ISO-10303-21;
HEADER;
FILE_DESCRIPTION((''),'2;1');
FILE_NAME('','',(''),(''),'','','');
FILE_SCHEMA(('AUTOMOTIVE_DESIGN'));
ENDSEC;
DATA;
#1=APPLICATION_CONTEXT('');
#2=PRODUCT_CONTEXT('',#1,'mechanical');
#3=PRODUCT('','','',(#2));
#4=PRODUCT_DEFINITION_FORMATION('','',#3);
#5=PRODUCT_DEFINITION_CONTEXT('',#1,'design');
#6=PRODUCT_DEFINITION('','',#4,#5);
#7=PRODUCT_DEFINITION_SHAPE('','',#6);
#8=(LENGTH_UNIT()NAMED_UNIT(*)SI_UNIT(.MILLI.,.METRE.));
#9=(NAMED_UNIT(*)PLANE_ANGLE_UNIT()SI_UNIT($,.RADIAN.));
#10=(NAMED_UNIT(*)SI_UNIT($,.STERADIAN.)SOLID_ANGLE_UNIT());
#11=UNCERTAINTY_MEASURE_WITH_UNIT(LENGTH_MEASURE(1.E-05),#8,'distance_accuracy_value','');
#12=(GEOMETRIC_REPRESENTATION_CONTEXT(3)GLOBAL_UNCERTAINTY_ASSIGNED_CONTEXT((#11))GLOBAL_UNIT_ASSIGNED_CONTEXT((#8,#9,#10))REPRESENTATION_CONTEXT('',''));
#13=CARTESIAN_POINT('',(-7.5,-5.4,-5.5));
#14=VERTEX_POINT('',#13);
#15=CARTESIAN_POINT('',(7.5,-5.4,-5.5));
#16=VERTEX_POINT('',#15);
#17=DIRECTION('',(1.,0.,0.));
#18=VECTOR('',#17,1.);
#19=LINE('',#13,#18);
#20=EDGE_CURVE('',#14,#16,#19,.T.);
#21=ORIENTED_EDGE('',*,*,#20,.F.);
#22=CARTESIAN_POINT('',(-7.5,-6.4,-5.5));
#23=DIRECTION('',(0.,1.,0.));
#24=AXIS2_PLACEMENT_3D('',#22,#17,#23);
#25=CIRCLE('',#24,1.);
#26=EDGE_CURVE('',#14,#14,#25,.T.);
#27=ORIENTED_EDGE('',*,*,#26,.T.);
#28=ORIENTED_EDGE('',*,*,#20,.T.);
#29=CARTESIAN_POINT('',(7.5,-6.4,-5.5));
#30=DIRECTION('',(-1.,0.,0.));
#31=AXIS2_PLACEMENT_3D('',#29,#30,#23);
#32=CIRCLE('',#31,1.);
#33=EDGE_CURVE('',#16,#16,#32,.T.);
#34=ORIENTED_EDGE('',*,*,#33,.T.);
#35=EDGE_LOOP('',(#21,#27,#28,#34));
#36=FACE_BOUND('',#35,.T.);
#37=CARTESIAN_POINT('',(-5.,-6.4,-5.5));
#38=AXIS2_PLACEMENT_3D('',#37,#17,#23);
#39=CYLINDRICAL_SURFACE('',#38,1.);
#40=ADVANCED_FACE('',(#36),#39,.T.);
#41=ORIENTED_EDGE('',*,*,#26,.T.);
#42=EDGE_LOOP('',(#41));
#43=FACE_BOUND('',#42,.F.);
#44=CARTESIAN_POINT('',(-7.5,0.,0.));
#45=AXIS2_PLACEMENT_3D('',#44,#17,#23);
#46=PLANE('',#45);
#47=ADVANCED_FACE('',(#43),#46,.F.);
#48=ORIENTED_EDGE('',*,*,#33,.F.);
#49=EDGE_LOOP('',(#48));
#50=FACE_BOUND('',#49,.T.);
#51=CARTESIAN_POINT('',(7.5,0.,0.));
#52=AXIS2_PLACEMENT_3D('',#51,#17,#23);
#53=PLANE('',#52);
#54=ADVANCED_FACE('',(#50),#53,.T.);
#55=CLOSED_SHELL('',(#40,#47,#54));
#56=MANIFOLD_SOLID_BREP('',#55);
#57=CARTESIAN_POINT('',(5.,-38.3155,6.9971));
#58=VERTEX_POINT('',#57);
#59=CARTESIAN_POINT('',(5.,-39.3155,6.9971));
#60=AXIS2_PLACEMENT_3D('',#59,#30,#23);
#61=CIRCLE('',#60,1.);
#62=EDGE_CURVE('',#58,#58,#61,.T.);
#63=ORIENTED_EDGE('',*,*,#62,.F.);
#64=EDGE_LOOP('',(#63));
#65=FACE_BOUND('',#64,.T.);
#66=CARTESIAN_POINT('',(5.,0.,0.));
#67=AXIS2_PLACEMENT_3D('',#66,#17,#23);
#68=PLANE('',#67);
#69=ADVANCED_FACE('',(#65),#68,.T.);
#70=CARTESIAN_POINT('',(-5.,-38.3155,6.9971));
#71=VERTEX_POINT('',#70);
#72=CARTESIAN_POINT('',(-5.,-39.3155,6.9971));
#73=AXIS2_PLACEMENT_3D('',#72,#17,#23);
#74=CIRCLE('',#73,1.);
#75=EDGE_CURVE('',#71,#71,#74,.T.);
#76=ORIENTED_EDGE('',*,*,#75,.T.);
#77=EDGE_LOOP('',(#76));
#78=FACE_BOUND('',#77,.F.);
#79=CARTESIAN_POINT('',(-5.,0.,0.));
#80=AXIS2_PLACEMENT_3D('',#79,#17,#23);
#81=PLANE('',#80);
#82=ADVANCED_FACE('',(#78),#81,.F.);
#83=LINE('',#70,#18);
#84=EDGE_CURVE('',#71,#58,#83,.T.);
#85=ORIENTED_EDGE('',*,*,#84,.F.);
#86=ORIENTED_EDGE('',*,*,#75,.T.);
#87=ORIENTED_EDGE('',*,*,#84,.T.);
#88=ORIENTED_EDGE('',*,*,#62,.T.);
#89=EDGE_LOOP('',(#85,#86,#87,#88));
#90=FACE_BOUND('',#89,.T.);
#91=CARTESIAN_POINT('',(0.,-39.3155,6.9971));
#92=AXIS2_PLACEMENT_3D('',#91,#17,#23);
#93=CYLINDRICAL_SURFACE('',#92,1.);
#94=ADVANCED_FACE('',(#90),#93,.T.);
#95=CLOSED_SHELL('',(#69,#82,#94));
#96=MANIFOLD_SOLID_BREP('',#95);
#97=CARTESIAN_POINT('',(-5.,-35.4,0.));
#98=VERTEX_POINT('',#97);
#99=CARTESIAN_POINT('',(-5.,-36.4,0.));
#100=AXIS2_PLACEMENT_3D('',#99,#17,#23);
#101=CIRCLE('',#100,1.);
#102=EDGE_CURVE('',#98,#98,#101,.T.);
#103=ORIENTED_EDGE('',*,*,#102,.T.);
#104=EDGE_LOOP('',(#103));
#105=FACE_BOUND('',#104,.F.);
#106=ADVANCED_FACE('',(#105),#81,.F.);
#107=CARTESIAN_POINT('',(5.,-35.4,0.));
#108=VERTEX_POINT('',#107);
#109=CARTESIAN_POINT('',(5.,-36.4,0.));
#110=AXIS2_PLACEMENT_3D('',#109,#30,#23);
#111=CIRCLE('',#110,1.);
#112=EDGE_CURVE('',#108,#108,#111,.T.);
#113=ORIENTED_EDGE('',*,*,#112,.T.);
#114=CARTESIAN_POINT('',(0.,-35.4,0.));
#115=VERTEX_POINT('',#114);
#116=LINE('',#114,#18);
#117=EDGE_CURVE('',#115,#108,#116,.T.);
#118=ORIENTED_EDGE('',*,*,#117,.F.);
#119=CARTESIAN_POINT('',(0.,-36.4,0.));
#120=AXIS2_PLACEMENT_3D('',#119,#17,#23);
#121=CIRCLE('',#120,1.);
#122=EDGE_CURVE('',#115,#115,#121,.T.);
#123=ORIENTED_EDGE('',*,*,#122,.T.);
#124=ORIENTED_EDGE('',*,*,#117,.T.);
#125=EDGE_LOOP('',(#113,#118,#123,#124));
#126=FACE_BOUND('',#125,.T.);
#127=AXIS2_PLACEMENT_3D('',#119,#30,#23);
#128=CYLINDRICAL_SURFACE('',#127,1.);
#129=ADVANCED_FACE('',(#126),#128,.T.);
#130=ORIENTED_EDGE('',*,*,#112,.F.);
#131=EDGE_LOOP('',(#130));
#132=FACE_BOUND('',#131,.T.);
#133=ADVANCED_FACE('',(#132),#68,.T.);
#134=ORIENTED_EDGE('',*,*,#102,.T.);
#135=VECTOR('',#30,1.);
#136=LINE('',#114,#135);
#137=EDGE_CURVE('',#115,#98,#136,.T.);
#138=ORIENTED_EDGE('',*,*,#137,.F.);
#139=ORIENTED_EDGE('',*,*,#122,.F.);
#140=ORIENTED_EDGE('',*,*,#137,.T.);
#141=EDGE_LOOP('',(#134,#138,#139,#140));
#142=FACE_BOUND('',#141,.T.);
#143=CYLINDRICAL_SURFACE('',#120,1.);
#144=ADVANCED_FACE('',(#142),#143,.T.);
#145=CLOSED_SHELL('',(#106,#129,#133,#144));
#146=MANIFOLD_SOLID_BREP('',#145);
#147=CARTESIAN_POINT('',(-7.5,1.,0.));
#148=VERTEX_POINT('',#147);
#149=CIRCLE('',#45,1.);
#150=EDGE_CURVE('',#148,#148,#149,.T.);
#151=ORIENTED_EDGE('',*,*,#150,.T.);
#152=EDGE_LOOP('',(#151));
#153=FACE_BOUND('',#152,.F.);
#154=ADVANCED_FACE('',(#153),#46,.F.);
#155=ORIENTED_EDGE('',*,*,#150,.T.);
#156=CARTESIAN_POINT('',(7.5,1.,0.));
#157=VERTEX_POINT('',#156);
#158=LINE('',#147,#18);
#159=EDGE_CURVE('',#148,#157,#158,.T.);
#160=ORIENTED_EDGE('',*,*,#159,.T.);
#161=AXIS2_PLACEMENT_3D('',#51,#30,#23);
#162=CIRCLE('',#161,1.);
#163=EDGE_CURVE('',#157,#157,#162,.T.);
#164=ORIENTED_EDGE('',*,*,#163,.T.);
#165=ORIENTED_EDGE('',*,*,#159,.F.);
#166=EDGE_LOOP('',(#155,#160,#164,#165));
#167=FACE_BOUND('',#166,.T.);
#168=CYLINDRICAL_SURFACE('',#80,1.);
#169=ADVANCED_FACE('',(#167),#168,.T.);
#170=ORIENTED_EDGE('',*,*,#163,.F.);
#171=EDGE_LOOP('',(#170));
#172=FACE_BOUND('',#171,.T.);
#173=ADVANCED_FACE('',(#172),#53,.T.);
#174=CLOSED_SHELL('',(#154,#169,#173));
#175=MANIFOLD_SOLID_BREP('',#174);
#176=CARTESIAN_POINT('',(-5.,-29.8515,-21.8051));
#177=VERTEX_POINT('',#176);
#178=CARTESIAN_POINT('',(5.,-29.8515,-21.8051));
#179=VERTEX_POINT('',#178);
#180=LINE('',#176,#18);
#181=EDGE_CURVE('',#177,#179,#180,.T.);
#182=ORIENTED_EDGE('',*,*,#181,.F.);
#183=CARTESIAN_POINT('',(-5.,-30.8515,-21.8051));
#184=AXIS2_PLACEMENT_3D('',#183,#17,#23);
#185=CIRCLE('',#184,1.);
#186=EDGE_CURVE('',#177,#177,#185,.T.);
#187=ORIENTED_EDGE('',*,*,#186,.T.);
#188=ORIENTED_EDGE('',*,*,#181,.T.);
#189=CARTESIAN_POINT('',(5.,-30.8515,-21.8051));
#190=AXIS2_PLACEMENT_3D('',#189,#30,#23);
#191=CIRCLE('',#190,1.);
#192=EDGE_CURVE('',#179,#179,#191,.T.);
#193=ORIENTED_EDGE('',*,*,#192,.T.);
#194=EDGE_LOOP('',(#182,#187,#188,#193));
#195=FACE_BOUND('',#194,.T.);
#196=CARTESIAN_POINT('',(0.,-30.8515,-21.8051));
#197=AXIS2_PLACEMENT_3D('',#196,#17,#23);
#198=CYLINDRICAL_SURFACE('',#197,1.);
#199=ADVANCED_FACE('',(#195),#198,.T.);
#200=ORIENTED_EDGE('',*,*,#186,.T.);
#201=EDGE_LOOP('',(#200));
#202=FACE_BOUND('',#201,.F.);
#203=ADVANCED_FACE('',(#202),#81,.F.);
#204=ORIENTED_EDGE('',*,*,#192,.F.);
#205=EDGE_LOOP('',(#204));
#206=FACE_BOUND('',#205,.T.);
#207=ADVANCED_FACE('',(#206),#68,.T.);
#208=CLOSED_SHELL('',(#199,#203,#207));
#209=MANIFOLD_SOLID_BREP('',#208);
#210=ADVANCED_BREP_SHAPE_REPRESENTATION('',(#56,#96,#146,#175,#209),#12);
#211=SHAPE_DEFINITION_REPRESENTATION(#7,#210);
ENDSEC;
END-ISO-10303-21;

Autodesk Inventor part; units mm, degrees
sketch "スケッチ1" plane through (0, 0, 0) normal (1, 0, 0) x (0, 1, 0)
  circle A0 centre (0, 0) radius 1
  circle A1 centre (-36.4, 0) radius 1
  circle A2 centre (-30.8515, -21.8051) radius 1
  line L0 (-36.4, 0) -> (0, 0)
  line L1 (-30.8515, -21.8051) -> (-36.4, 0)
  line L2 (0, 0) -> (0, 70.9009)
  circle A3 centre (-6.4, -5.5) radius 1
  circle A4 centre (-39.3155, 6.9971) radius 1
  line L3 (0, 0) -> (-6.4, -5.5)
  line L4 (-39.3155, 6.9971) -> (-36.4, 0)
  line L5 (-48.5786, 0) -> (9.2631, 0) projected
  line L6 (-39.3155, 6.9971) -> (-38.2495, 7.2684)
  line L7 (-36.4, 0) -> (-38.2495, 7.2684)
  line L8 (-6.4, -5.5) -> (-39.3155, 6.9971)
  line L9 (-6.4, -5.5) -> (-5.2926, 1.9178)
  line L10 (-5.2926, 1.9178) -> (-39.3155, 6.9971)
  dimension "d0" = 2
  dimension "d1" = 2
  dimension "d2" = 2
  dimension "d3" = 36.4
  dimension "d4" = 22.5
  dimension "d5" = 90
  dimension "d9" = 2
  dimension "d10" = 2
  dimension "d23" = 1.1
  dimension "d24" = 7.5
  dimension "d29" = 6.4
  dimension "d30" = 5.5
  dimension "d33" = 7.5
  dimension "d34" = 34.4
extrude "押し出し1" add sketch "スケッチ1" along normal mid plane 10 contours L5 L2 A0 | A0 L3 L5 | L2 L0 A0 | A0 L0 L3 | L3 L9 A3 | A3 L8 L3 | L9 L8 A3 | L0 L7 A1 | A1 L1 L0 | L7 L4 A1 | A1 L5 L1 | L5 A1 L4 | L8 L10 A4 | A4 L4 L8 | L10 L6 A4 | A4 L6 L4 | A2
offset faces "サイズ1" outward 2.5 faces at (5, 0.5848, -0.397) (-5, 0.5848, -0.397) (5, -6.7236, -5.5798) (-5, -6.0764, -5.4202)
properties part number "HbFingerPosture_flex02"
